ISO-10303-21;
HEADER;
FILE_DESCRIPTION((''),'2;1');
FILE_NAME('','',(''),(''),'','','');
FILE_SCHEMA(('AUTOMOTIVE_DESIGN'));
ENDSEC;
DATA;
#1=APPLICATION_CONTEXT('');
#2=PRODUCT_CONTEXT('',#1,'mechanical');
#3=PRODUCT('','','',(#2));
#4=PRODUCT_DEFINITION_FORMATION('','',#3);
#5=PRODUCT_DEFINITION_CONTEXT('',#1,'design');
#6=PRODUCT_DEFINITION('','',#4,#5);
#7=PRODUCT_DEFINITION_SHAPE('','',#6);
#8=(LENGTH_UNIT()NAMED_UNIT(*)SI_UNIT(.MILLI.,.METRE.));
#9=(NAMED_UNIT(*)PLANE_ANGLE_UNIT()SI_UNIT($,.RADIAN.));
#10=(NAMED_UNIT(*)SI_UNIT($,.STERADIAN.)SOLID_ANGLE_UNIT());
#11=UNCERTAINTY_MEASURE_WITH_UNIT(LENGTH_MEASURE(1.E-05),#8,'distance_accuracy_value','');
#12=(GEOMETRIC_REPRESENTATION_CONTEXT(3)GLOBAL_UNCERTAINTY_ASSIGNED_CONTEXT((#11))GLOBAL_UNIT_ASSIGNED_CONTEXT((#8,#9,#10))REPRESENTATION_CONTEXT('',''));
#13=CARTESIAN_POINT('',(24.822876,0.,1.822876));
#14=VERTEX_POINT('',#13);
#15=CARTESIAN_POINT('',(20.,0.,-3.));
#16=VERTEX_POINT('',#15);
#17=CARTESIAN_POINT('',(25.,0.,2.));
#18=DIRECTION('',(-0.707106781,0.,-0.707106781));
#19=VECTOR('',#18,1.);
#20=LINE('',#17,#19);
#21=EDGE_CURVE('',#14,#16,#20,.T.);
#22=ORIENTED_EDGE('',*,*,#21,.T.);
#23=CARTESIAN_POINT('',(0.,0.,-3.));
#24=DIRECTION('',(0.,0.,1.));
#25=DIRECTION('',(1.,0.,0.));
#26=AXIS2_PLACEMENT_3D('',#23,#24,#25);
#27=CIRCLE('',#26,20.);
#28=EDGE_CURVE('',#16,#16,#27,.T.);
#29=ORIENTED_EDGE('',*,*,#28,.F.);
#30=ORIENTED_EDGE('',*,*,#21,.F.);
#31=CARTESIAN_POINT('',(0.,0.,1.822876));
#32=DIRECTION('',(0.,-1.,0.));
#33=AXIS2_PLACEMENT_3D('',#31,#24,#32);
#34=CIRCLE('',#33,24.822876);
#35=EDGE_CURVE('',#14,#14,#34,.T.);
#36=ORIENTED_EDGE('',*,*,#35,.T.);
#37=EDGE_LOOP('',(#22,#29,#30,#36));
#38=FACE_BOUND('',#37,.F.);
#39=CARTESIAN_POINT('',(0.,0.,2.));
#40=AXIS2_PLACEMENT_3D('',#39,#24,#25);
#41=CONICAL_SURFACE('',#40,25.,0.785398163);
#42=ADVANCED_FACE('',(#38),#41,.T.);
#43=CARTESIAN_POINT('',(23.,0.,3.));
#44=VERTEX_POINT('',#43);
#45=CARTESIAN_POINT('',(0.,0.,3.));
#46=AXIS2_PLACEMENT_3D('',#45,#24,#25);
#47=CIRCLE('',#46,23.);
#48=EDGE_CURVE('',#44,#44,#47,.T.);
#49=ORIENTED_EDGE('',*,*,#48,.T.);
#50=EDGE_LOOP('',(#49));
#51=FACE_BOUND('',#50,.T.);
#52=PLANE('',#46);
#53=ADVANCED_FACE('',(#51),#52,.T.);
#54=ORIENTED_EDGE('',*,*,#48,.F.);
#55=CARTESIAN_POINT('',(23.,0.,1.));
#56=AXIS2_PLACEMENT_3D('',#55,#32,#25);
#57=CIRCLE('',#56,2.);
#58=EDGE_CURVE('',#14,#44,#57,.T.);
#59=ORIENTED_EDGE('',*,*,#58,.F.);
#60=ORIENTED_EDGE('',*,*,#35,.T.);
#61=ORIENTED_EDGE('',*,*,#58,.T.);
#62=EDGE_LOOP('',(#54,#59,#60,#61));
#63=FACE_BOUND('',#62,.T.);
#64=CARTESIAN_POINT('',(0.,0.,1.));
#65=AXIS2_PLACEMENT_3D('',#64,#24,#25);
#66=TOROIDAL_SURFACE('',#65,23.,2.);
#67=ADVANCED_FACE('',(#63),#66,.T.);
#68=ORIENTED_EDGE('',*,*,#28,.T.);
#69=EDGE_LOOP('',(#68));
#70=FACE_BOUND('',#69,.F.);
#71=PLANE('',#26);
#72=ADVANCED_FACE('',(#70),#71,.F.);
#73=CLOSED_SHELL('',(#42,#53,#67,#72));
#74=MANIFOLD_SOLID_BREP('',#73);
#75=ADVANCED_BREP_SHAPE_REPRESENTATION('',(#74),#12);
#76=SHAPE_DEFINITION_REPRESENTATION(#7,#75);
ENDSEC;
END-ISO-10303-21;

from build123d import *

# Parameters (mm, degrees)
F0_R     = 25
F1_DEPTH = 3
F2_R     = 2


# Not quite as in the source:
# - a fillet or chamfer that OpenCascade refuses, or shapes differently, is made with other operations: its cross-section is extruded or revolved along the edge and cut away or added


with BuildPart() as f1:
    # F0 (on Top) → F1 (new body, symmetric)
    with BuildSketch(Plane.XY):
        Circle(F0_R)
    extrude(amount=F1_DEPTH, both=True)

    # F2
    f2_edges = [f1.edges().sort_by_distance(p)[0] for p in [
        (-25, 0, 3),
    ]]
    fillet(f2_edges, radius=F2_R)

    # F3: chamfer of 5 on 1 edges, made by hand

    # F3_s1 → F3_t2 (revolve, cut)
    with BuildSketch(Plane.XZ):
        Polygon((25, 2), (20, -3), (25, -3), align=None)
    revolve(axis=Axis((0, 0, -3), (0, 0, 1)), mode=Mode.SUBTRACT)


solid = f1.part
